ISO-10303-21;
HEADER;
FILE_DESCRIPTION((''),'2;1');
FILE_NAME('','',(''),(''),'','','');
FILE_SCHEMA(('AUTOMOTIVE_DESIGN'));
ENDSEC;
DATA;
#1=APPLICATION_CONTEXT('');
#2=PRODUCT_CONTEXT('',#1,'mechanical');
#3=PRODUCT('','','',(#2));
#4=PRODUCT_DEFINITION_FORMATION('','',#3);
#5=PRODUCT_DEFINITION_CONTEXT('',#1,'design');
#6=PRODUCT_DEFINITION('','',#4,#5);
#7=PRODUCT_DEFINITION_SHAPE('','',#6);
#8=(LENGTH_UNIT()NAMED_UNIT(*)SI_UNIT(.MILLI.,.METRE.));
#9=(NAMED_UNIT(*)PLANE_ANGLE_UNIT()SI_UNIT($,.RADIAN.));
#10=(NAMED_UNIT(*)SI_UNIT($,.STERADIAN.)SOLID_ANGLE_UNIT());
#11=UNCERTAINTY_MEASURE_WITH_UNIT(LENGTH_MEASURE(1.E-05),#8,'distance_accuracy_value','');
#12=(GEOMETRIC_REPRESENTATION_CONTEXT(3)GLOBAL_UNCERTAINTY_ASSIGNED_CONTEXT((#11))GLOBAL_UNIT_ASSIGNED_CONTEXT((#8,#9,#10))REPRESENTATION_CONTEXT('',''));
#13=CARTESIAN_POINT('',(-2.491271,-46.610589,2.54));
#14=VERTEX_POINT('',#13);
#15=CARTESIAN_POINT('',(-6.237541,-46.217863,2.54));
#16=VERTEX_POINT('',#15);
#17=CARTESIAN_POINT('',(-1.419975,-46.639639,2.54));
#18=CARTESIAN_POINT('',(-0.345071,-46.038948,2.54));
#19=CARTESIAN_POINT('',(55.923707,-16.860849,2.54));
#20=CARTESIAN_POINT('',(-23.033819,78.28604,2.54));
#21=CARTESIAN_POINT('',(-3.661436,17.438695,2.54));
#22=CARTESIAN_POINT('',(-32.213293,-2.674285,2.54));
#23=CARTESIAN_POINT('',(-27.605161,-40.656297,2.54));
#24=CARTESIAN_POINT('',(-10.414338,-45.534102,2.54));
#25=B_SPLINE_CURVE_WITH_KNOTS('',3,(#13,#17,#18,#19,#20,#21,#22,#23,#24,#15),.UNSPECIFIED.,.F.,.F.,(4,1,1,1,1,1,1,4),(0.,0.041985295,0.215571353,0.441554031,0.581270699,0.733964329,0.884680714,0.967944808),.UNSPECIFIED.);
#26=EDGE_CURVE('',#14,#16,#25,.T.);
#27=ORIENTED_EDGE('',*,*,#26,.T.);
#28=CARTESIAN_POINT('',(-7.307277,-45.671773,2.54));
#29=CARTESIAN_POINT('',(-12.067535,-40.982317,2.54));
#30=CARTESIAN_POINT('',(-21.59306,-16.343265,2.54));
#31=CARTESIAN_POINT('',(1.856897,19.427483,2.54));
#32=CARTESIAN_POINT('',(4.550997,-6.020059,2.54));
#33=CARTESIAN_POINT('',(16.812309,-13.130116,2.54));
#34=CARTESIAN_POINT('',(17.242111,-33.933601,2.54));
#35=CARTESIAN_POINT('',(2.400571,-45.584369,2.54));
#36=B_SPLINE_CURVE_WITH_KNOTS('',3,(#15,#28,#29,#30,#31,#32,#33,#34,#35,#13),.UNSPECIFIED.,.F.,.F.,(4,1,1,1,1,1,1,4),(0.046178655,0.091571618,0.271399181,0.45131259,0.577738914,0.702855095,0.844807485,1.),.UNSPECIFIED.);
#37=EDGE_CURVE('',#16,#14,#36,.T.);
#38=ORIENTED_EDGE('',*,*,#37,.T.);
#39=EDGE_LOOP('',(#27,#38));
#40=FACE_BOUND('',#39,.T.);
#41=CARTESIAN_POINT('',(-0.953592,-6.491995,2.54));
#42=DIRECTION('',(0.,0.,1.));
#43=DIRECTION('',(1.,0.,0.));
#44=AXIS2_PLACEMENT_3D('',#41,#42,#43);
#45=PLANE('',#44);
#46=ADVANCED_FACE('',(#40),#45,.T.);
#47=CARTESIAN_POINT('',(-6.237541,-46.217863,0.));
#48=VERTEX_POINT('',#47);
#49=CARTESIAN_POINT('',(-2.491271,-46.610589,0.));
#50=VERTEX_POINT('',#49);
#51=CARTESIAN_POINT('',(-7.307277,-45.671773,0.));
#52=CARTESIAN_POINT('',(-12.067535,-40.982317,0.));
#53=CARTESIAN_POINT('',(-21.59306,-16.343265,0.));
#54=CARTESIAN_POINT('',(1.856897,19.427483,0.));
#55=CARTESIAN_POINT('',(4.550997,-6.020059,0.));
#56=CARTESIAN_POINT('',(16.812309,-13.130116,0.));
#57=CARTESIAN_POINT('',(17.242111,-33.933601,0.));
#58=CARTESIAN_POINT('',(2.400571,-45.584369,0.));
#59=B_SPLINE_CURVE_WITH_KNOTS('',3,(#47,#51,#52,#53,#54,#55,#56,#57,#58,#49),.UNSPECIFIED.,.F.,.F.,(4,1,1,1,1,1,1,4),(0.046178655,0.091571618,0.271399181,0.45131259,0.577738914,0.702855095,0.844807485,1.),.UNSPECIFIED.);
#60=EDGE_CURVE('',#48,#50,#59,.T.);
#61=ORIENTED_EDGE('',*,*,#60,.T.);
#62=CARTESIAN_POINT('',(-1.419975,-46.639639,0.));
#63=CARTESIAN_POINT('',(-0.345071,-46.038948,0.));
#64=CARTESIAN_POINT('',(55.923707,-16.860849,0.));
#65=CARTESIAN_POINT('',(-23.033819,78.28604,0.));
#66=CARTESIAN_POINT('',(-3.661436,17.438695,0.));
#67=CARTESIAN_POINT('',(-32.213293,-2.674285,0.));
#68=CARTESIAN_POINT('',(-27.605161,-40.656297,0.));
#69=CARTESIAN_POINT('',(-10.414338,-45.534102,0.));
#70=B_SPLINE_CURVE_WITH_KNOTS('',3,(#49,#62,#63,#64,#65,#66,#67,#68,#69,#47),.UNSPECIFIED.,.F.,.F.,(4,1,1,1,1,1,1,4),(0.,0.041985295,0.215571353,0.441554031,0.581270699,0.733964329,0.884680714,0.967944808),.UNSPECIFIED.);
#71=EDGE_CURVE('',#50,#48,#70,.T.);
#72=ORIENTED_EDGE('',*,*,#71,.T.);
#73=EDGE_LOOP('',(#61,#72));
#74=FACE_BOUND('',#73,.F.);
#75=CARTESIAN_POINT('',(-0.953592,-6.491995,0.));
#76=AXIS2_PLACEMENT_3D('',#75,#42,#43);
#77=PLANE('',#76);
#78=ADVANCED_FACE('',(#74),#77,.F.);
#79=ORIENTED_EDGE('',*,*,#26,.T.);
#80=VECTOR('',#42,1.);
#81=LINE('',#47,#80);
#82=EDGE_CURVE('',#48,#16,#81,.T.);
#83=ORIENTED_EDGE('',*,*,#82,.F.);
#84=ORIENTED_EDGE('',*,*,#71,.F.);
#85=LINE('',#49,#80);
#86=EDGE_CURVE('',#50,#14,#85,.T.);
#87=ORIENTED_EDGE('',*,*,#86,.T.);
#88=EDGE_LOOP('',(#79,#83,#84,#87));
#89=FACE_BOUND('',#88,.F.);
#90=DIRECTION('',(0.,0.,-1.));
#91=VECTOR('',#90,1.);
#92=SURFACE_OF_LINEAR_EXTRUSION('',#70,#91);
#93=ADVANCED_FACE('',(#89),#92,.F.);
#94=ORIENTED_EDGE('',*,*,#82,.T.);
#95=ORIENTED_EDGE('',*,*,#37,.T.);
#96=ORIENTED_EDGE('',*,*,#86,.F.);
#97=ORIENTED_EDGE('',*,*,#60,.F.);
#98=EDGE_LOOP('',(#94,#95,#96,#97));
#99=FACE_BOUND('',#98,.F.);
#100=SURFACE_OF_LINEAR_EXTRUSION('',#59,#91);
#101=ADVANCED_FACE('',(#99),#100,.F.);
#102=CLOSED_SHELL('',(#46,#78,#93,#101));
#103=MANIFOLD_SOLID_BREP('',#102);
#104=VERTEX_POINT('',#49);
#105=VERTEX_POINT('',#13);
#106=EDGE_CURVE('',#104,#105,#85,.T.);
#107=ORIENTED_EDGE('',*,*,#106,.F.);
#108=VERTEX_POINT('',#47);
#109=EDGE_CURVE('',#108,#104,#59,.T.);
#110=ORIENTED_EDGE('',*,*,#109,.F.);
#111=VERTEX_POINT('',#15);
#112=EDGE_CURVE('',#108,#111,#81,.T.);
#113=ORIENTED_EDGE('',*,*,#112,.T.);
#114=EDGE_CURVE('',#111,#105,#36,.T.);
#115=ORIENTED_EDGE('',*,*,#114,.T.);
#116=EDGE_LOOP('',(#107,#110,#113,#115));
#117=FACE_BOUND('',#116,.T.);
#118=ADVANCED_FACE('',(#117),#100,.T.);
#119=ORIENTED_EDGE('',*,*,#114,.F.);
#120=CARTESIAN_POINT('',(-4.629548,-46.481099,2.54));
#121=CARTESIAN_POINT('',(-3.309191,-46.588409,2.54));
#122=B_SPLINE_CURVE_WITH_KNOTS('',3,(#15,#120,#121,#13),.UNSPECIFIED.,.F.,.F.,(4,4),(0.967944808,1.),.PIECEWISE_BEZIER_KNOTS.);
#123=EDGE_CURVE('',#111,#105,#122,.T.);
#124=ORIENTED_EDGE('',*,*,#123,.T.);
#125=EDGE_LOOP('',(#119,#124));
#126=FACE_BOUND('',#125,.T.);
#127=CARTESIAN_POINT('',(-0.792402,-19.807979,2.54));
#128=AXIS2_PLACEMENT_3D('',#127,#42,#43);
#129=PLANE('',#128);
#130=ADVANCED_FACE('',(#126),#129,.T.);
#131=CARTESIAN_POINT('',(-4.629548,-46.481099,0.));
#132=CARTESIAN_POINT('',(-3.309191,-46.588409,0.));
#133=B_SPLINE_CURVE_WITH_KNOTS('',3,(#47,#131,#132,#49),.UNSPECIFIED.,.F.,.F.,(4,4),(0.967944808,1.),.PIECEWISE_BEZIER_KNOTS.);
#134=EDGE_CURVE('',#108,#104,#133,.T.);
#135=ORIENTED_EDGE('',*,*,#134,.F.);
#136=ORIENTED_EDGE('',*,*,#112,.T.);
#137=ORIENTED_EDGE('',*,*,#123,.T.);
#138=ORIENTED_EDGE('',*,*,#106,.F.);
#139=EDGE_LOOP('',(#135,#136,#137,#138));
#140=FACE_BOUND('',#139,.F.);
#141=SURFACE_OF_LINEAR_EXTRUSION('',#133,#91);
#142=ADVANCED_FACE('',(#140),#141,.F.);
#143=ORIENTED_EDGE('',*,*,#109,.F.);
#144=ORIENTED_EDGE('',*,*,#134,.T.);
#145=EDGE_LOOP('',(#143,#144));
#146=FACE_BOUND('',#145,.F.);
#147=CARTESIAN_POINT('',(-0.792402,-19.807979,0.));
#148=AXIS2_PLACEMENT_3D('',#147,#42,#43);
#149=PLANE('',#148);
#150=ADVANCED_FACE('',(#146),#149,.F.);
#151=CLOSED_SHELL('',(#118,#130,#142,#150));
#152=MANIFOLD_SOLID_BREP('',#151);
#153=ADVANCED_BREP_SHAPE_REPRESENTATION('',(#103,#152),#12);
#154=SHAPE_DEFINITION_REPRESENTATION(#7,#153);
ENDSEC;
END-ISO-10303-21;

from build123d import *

# Parameters (mm, degrees)
F1_DEPTH = 2.54
F2_DEPTH = 2.54


with BuildPart() as f1:
    # F0 (on Top) → F1 (new body)
    with BuildSketch(Plane.XY):
        with BuildLine():
            add(Edge.make_bspline(
                [(-6.2375405564, -46.2178631648), (-7.307276746, -45.6717733468), (-12.0675351695, -40.9823170252), (-21.5930596382, -16.3432652524), (1.8568971434, 19.4274825185), (4.5509972625, -6.0200594515), (16.8123086502, -13.1301159921), (17.2421105498, -33.9336012457), (2.4005706068, -45.5843690827), (-2.4912711233, -46.6105885752)],
                knots=[0.046178655, 0.046178655, 0.046178655, 0.046178655, 0.0915716184, 0.2713991814, 0.4513125898, 0.5777389143, 0.7028550953, 0.8448074849, 1, 1, 1, 1], degree=3))
            add(Edge.make_bspline(
                [(-2.4912711233, -46.6105885752), (-1.4199750088, -46.6396392568), (-0.345071475, -46.0389480469), (55.9237069542, -16.8608488775), (-23.0338192489, 78.286040227), (-3.66143577, 17.438695129), (-32.2132933669, -2.6742848508), (-27.6051608315, -40.6562967051), (-10.4143382247, -45.5341023771), (-6.2375405564, -46.2178631648)],
                knots=[0, 0, 0, 0, 0.0419852951, 0.2155713527, 0.4415540311, 0.5812706992, 0.7339643286, 0.8846807143, 0.9679448078, 0.9679448078, 0.9679448078, 0.9679448078], degree=3))
        make_face()
    extrude(amount=F1_DEPTH)


with BuildPart() as f2:
    # F0 (on Top) → F2 (new body)
    with BuildSketch(Plane.XY):
        with BuildLine():
            add(Edge.make_bspline(
                [(-6.2375405564, -46.2178631648), (-4.6295478885, -46.4810988829), (-3.3091908909, -46.5884087815), (-2.4912711233, -46.6105885752)],
                knots=[0.9679448078, 0.9679448078, 0.9679448078, 0.9679448078, 1, 1, 1, 1], degree=3))
            add(Edge.make_bspline(
                [(-6.2375405564, -46.2178631648), (-7.307276746, -45.6717733468), (-12.0675351695, -40.9823170252), (-21.5930596382, -16.3432652524), (1.8568971434, 19.4274825185), (4.5509972625, -6.0200594515), (16.8123086502, -13.1301159921), (17.2421105498, -33.9336012457), (2.4005706068, -45.5843690827), (-2.4912711233, -46.6105885752)],
                knots=[0.046178655, 0.046178655, 0.046178655, 0.046178655, 0.0915716184, 0.2713991814, 0.4513125898, 0.5777389143, 0.7028550953, 0.8448074849, 1, 1, 1, 1], degree=3))
        make_face()
    extrude(amount=F2_DEPTH)


solid = Compound([f1.part, f2.part])
